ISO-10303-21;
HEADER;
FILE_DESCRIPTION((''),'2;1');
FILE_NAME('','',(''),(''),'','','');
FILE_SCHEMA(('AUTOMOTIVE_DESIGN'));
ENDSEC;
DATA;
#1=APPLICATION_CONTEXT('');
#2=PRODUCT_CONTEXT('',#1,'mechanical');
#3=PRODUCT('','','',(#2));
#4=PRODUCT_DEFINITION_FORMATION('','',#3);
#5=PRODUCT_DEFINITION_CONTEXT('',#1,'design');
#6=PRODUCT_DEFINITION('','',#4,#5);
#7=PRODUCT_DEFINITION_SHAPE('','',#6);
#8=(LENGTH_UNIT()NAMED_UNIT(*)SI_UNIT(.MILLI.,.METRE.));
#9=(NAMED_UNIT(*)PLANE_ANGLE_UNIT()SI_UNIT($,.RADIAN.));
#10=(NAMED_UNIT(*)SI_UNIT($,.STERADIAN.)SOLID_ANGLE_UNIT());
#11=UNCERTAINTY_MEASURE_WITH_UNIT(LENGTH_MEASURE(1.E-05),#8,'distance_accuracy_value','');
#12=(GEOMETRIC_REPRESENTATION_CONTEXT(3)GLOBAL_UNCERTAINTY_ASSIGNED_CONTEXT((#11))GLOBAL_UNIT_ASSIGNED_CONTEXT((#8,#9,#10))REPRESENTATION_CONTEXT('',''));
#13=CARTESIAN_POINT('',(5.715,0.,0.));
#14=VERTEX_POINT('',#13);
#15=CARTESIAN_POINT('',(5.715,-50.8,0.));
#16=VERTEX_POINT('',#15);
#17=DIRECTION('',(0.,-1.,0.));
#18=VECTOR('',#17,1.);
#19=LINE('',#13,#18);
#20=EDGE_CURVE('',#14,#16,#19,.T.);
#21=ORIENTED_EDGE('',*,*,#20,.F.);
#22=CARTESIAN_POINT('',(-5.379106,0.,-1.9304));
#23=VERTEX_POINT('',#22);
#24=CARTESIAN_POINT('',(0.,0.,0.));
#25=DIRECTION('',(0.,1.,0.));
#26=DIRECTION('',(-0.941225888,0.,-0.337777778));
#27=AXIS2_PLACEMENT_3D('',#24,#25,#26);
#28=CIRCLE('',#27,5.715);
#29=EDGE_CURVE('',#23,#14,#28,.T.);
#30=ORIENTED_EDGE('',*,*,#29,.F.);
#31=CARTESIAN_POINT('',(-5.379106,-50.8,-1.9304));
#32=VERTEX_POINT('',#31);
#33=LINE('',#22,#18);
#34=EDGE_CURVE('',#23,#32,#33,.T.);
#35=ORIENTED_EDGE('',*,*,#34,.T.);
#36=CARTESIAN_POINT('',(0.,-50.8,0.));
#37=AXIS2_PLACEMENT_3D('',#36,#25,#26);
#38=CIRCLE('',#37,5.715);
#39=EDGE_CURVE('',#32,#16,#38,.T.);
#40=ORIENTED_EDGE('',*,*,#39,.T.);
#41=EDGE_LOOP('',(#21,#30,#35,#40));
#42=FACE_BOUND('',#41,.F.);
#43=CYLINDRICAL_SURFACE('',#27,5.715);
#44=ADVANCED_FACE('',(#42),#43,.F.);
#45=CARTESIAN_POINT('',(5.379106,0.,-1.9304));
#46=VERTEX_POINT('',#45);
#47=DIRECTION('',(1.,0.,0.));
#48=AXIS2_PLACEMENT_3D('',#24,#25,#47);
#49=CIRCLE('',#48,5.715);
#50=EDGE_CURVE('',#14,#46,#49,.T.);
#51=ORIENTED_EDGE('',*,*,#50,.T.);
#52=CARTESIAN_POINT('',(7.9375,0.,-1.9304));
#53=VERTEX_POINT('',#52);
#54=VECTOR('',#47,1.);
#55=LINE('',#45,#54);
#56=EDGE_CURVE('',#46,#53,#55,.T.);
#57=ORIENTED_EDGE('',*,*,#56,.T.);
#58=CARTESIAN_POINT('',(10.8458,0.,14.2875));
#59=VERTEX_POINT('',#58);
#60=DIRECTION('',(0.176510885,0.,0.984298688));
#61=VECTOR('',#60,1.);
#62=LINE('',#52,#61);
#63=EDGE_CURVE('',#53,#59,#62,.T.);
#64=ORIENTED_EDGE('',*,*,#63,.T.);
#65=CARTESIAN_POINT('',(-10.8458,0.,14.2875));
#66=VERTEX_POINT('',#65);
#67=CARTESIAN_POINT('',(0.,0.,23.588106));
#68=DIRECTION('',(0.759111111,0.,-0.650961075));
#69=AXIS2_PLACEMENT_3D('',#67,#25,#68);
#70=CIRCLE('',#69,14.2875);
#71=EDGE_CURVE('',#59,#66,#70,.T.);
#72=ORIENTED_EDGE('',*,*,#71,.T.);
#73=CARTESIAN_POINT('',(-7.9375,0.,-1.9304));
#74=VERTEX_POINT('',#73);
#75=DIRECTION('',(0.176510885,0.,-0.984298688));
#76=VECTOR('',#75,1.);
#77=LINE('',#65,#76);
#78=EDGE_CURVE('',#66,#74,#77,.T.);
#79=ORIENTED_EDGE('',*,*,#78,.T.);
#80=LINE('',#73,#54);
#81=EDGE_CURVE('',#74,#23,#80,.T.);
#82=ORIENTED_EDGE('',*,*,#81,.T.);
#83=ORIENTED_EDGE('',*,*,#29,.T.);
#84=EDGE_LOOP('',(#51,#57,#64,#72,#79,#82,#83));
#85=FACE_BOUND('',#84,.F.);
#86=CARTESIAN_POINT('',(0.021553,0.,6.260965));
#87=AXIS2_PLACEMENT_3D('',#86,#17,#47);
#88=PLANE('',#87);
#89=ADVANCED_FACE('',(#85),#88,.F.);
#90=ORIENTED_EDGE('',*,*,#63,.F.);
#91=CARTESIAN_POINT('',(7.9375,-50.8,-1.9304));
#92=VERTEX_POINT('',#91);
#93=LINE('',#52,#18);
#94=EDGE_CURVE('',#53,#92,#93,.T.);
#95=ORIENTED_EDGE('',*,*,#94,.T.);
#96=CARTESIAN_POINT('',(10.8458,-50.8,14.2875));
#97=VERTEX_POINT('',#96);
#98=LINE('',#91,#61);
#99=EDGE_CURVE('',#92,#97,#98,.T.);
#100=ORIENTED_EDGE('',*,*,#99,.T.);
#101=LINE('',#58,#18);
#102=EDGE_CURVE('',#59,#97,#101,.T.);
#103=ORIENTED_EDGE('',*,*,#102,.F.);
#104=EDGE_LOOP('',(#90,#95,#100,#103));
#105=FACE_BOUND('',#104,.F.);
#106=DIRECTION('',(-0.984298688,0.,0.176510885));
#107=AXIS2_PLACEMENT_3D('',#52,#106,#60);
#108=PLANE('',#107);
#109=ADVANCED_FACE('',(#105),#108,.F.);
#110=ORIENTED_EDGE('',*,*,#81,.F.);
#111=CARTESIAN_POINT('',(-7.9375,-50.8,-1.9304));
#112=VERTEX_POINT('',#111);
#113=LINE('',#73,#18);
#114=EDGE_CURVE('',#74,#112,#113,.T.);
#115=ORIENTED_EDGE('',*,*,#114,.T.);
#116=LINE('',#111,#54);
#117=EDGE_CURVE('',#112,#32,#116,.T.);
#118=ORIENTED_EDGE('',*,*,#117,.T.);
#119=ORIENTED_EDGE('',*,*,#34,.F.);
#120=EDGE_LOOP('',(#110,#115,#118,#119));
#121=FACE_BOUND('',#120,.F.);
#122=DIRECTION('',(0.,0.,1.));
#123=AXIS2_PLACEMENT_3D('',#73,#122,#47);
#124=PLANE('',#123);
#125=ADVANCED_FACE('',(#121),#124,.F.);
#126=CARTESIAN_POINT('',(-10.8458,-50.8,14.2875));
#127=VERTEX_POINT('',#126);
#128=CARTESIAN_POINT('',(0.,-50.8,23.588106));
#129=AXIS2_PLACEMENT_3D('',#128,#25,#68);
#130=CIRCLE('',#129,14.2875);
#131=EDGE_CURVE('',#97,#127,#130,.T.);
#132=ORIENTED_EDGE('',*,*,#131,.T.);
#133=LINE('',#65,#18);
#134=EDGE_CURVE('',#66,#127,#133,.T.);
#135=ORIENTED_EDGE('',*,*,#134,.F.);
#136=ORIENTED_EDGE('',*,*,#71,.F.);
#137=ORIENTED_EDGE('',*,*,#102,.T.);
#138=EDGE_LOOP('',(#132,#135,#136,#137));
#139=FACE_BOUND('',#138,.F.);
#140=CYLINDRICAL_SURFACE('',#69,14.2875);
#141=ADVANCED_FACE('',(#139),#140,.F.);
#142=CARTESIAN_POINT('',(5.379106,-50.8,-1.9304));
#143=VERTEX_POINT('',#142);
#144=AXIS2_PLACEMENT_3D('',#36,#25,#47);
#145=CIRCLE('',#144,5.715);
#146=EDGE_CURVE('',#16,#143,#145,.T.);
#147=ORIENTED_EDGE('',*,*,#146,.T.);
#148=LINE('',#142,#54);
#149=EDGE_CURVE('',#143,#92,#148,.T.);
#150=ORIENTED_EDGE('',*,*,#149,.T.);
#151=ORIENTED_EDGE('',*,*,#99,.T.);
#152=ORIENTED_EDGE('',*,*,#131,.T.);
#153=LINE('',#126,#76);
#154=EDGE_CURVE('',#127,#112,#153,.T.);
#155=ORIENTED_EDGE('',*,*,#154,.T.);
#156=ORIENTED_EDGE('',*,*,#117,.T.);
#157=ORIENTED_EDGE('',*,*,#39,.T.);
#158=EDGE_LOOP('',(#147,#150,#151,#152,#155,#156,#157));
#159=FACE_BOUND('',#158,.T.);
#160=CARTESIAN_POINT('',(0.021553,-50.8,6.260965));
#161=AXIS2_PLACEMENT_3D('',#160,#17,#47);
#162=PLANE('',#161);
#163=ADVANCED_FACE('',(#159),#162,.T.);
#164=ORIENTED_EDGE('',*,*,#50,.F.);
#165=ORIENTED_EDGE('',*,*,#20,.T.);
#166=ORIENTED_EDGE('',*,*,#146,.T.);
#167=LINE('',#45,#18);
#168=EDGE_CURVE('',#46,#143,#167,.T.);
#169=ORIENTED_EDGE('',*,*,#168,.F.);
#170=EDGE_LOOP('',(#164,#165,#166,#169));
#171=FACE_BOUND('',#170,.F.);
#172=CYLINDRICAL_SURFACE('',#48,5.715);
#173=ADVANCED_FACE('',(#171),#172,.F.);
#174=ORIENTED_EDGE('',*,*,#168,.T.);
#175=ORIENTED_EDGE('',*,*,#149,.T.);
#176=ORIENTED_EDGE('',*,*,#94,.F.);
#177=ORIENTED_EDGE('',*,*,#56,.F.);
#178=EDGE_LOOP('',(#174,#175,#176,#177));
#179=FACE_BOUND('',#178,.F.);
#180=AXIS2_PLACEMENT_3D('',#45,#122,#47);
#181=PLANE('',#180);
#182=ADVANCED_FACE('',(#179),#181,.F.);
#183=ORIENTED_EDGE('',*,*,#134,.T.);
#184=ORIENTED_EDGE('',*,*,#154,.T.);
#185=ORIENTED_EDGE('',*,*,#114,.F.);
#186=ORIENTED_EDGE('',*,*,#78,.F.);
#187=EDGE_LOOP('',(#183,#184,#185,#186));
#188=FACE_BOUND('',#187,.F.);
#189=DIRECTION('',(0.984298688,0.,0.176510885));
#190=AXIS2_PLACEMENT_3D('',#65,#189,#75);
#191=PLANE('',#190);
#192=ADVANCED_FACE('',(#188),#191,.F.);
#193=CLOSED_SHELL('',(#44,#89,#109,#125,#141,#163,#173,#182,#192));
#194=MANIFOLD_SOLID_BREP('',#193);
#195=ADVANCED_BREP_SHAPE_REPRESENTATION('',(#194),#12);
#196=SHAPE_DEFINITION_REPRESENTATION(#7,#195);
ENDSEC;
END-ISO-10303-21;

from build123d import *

# Parameters (mm, degrees)
F1_DEPTH = 50.8


# Not quite as in the source:
# - a feature names something its author has since deleted; it is built from what else it names


with BuildPart() as f1:
    # F0 (on Front) → F1 (new body)
    with BuildSketch(Plane.XZ):
        with BuildLine():
            Line((7.9375, -1.9304), (10.8458, 14.2875))
            ThreePointArc((10.8458, 14.2875), (0, 9.3006063571), (-10.8458, 14.2875))
            Line((-10.8458, 14.2875), (-7.9375, -1.9304))
            Line((-7.9375, -1.9304), (-5.3791059517, -1.9304))
            ThreePointArc((-5.3791059517, -1.9304), (-0.9797026298, 5.6304003194), (5.715, 0))
            ThreePointArc((5.715, 0), (5.6304003194, -0.9797026298), (5.3791059517, -1.9304))
            Line((5.3791059517, -1.9304), (7.9375, -1.9304))
        make_face()
    extrude(amount=F1_DEPTH)


solid = f1.part
